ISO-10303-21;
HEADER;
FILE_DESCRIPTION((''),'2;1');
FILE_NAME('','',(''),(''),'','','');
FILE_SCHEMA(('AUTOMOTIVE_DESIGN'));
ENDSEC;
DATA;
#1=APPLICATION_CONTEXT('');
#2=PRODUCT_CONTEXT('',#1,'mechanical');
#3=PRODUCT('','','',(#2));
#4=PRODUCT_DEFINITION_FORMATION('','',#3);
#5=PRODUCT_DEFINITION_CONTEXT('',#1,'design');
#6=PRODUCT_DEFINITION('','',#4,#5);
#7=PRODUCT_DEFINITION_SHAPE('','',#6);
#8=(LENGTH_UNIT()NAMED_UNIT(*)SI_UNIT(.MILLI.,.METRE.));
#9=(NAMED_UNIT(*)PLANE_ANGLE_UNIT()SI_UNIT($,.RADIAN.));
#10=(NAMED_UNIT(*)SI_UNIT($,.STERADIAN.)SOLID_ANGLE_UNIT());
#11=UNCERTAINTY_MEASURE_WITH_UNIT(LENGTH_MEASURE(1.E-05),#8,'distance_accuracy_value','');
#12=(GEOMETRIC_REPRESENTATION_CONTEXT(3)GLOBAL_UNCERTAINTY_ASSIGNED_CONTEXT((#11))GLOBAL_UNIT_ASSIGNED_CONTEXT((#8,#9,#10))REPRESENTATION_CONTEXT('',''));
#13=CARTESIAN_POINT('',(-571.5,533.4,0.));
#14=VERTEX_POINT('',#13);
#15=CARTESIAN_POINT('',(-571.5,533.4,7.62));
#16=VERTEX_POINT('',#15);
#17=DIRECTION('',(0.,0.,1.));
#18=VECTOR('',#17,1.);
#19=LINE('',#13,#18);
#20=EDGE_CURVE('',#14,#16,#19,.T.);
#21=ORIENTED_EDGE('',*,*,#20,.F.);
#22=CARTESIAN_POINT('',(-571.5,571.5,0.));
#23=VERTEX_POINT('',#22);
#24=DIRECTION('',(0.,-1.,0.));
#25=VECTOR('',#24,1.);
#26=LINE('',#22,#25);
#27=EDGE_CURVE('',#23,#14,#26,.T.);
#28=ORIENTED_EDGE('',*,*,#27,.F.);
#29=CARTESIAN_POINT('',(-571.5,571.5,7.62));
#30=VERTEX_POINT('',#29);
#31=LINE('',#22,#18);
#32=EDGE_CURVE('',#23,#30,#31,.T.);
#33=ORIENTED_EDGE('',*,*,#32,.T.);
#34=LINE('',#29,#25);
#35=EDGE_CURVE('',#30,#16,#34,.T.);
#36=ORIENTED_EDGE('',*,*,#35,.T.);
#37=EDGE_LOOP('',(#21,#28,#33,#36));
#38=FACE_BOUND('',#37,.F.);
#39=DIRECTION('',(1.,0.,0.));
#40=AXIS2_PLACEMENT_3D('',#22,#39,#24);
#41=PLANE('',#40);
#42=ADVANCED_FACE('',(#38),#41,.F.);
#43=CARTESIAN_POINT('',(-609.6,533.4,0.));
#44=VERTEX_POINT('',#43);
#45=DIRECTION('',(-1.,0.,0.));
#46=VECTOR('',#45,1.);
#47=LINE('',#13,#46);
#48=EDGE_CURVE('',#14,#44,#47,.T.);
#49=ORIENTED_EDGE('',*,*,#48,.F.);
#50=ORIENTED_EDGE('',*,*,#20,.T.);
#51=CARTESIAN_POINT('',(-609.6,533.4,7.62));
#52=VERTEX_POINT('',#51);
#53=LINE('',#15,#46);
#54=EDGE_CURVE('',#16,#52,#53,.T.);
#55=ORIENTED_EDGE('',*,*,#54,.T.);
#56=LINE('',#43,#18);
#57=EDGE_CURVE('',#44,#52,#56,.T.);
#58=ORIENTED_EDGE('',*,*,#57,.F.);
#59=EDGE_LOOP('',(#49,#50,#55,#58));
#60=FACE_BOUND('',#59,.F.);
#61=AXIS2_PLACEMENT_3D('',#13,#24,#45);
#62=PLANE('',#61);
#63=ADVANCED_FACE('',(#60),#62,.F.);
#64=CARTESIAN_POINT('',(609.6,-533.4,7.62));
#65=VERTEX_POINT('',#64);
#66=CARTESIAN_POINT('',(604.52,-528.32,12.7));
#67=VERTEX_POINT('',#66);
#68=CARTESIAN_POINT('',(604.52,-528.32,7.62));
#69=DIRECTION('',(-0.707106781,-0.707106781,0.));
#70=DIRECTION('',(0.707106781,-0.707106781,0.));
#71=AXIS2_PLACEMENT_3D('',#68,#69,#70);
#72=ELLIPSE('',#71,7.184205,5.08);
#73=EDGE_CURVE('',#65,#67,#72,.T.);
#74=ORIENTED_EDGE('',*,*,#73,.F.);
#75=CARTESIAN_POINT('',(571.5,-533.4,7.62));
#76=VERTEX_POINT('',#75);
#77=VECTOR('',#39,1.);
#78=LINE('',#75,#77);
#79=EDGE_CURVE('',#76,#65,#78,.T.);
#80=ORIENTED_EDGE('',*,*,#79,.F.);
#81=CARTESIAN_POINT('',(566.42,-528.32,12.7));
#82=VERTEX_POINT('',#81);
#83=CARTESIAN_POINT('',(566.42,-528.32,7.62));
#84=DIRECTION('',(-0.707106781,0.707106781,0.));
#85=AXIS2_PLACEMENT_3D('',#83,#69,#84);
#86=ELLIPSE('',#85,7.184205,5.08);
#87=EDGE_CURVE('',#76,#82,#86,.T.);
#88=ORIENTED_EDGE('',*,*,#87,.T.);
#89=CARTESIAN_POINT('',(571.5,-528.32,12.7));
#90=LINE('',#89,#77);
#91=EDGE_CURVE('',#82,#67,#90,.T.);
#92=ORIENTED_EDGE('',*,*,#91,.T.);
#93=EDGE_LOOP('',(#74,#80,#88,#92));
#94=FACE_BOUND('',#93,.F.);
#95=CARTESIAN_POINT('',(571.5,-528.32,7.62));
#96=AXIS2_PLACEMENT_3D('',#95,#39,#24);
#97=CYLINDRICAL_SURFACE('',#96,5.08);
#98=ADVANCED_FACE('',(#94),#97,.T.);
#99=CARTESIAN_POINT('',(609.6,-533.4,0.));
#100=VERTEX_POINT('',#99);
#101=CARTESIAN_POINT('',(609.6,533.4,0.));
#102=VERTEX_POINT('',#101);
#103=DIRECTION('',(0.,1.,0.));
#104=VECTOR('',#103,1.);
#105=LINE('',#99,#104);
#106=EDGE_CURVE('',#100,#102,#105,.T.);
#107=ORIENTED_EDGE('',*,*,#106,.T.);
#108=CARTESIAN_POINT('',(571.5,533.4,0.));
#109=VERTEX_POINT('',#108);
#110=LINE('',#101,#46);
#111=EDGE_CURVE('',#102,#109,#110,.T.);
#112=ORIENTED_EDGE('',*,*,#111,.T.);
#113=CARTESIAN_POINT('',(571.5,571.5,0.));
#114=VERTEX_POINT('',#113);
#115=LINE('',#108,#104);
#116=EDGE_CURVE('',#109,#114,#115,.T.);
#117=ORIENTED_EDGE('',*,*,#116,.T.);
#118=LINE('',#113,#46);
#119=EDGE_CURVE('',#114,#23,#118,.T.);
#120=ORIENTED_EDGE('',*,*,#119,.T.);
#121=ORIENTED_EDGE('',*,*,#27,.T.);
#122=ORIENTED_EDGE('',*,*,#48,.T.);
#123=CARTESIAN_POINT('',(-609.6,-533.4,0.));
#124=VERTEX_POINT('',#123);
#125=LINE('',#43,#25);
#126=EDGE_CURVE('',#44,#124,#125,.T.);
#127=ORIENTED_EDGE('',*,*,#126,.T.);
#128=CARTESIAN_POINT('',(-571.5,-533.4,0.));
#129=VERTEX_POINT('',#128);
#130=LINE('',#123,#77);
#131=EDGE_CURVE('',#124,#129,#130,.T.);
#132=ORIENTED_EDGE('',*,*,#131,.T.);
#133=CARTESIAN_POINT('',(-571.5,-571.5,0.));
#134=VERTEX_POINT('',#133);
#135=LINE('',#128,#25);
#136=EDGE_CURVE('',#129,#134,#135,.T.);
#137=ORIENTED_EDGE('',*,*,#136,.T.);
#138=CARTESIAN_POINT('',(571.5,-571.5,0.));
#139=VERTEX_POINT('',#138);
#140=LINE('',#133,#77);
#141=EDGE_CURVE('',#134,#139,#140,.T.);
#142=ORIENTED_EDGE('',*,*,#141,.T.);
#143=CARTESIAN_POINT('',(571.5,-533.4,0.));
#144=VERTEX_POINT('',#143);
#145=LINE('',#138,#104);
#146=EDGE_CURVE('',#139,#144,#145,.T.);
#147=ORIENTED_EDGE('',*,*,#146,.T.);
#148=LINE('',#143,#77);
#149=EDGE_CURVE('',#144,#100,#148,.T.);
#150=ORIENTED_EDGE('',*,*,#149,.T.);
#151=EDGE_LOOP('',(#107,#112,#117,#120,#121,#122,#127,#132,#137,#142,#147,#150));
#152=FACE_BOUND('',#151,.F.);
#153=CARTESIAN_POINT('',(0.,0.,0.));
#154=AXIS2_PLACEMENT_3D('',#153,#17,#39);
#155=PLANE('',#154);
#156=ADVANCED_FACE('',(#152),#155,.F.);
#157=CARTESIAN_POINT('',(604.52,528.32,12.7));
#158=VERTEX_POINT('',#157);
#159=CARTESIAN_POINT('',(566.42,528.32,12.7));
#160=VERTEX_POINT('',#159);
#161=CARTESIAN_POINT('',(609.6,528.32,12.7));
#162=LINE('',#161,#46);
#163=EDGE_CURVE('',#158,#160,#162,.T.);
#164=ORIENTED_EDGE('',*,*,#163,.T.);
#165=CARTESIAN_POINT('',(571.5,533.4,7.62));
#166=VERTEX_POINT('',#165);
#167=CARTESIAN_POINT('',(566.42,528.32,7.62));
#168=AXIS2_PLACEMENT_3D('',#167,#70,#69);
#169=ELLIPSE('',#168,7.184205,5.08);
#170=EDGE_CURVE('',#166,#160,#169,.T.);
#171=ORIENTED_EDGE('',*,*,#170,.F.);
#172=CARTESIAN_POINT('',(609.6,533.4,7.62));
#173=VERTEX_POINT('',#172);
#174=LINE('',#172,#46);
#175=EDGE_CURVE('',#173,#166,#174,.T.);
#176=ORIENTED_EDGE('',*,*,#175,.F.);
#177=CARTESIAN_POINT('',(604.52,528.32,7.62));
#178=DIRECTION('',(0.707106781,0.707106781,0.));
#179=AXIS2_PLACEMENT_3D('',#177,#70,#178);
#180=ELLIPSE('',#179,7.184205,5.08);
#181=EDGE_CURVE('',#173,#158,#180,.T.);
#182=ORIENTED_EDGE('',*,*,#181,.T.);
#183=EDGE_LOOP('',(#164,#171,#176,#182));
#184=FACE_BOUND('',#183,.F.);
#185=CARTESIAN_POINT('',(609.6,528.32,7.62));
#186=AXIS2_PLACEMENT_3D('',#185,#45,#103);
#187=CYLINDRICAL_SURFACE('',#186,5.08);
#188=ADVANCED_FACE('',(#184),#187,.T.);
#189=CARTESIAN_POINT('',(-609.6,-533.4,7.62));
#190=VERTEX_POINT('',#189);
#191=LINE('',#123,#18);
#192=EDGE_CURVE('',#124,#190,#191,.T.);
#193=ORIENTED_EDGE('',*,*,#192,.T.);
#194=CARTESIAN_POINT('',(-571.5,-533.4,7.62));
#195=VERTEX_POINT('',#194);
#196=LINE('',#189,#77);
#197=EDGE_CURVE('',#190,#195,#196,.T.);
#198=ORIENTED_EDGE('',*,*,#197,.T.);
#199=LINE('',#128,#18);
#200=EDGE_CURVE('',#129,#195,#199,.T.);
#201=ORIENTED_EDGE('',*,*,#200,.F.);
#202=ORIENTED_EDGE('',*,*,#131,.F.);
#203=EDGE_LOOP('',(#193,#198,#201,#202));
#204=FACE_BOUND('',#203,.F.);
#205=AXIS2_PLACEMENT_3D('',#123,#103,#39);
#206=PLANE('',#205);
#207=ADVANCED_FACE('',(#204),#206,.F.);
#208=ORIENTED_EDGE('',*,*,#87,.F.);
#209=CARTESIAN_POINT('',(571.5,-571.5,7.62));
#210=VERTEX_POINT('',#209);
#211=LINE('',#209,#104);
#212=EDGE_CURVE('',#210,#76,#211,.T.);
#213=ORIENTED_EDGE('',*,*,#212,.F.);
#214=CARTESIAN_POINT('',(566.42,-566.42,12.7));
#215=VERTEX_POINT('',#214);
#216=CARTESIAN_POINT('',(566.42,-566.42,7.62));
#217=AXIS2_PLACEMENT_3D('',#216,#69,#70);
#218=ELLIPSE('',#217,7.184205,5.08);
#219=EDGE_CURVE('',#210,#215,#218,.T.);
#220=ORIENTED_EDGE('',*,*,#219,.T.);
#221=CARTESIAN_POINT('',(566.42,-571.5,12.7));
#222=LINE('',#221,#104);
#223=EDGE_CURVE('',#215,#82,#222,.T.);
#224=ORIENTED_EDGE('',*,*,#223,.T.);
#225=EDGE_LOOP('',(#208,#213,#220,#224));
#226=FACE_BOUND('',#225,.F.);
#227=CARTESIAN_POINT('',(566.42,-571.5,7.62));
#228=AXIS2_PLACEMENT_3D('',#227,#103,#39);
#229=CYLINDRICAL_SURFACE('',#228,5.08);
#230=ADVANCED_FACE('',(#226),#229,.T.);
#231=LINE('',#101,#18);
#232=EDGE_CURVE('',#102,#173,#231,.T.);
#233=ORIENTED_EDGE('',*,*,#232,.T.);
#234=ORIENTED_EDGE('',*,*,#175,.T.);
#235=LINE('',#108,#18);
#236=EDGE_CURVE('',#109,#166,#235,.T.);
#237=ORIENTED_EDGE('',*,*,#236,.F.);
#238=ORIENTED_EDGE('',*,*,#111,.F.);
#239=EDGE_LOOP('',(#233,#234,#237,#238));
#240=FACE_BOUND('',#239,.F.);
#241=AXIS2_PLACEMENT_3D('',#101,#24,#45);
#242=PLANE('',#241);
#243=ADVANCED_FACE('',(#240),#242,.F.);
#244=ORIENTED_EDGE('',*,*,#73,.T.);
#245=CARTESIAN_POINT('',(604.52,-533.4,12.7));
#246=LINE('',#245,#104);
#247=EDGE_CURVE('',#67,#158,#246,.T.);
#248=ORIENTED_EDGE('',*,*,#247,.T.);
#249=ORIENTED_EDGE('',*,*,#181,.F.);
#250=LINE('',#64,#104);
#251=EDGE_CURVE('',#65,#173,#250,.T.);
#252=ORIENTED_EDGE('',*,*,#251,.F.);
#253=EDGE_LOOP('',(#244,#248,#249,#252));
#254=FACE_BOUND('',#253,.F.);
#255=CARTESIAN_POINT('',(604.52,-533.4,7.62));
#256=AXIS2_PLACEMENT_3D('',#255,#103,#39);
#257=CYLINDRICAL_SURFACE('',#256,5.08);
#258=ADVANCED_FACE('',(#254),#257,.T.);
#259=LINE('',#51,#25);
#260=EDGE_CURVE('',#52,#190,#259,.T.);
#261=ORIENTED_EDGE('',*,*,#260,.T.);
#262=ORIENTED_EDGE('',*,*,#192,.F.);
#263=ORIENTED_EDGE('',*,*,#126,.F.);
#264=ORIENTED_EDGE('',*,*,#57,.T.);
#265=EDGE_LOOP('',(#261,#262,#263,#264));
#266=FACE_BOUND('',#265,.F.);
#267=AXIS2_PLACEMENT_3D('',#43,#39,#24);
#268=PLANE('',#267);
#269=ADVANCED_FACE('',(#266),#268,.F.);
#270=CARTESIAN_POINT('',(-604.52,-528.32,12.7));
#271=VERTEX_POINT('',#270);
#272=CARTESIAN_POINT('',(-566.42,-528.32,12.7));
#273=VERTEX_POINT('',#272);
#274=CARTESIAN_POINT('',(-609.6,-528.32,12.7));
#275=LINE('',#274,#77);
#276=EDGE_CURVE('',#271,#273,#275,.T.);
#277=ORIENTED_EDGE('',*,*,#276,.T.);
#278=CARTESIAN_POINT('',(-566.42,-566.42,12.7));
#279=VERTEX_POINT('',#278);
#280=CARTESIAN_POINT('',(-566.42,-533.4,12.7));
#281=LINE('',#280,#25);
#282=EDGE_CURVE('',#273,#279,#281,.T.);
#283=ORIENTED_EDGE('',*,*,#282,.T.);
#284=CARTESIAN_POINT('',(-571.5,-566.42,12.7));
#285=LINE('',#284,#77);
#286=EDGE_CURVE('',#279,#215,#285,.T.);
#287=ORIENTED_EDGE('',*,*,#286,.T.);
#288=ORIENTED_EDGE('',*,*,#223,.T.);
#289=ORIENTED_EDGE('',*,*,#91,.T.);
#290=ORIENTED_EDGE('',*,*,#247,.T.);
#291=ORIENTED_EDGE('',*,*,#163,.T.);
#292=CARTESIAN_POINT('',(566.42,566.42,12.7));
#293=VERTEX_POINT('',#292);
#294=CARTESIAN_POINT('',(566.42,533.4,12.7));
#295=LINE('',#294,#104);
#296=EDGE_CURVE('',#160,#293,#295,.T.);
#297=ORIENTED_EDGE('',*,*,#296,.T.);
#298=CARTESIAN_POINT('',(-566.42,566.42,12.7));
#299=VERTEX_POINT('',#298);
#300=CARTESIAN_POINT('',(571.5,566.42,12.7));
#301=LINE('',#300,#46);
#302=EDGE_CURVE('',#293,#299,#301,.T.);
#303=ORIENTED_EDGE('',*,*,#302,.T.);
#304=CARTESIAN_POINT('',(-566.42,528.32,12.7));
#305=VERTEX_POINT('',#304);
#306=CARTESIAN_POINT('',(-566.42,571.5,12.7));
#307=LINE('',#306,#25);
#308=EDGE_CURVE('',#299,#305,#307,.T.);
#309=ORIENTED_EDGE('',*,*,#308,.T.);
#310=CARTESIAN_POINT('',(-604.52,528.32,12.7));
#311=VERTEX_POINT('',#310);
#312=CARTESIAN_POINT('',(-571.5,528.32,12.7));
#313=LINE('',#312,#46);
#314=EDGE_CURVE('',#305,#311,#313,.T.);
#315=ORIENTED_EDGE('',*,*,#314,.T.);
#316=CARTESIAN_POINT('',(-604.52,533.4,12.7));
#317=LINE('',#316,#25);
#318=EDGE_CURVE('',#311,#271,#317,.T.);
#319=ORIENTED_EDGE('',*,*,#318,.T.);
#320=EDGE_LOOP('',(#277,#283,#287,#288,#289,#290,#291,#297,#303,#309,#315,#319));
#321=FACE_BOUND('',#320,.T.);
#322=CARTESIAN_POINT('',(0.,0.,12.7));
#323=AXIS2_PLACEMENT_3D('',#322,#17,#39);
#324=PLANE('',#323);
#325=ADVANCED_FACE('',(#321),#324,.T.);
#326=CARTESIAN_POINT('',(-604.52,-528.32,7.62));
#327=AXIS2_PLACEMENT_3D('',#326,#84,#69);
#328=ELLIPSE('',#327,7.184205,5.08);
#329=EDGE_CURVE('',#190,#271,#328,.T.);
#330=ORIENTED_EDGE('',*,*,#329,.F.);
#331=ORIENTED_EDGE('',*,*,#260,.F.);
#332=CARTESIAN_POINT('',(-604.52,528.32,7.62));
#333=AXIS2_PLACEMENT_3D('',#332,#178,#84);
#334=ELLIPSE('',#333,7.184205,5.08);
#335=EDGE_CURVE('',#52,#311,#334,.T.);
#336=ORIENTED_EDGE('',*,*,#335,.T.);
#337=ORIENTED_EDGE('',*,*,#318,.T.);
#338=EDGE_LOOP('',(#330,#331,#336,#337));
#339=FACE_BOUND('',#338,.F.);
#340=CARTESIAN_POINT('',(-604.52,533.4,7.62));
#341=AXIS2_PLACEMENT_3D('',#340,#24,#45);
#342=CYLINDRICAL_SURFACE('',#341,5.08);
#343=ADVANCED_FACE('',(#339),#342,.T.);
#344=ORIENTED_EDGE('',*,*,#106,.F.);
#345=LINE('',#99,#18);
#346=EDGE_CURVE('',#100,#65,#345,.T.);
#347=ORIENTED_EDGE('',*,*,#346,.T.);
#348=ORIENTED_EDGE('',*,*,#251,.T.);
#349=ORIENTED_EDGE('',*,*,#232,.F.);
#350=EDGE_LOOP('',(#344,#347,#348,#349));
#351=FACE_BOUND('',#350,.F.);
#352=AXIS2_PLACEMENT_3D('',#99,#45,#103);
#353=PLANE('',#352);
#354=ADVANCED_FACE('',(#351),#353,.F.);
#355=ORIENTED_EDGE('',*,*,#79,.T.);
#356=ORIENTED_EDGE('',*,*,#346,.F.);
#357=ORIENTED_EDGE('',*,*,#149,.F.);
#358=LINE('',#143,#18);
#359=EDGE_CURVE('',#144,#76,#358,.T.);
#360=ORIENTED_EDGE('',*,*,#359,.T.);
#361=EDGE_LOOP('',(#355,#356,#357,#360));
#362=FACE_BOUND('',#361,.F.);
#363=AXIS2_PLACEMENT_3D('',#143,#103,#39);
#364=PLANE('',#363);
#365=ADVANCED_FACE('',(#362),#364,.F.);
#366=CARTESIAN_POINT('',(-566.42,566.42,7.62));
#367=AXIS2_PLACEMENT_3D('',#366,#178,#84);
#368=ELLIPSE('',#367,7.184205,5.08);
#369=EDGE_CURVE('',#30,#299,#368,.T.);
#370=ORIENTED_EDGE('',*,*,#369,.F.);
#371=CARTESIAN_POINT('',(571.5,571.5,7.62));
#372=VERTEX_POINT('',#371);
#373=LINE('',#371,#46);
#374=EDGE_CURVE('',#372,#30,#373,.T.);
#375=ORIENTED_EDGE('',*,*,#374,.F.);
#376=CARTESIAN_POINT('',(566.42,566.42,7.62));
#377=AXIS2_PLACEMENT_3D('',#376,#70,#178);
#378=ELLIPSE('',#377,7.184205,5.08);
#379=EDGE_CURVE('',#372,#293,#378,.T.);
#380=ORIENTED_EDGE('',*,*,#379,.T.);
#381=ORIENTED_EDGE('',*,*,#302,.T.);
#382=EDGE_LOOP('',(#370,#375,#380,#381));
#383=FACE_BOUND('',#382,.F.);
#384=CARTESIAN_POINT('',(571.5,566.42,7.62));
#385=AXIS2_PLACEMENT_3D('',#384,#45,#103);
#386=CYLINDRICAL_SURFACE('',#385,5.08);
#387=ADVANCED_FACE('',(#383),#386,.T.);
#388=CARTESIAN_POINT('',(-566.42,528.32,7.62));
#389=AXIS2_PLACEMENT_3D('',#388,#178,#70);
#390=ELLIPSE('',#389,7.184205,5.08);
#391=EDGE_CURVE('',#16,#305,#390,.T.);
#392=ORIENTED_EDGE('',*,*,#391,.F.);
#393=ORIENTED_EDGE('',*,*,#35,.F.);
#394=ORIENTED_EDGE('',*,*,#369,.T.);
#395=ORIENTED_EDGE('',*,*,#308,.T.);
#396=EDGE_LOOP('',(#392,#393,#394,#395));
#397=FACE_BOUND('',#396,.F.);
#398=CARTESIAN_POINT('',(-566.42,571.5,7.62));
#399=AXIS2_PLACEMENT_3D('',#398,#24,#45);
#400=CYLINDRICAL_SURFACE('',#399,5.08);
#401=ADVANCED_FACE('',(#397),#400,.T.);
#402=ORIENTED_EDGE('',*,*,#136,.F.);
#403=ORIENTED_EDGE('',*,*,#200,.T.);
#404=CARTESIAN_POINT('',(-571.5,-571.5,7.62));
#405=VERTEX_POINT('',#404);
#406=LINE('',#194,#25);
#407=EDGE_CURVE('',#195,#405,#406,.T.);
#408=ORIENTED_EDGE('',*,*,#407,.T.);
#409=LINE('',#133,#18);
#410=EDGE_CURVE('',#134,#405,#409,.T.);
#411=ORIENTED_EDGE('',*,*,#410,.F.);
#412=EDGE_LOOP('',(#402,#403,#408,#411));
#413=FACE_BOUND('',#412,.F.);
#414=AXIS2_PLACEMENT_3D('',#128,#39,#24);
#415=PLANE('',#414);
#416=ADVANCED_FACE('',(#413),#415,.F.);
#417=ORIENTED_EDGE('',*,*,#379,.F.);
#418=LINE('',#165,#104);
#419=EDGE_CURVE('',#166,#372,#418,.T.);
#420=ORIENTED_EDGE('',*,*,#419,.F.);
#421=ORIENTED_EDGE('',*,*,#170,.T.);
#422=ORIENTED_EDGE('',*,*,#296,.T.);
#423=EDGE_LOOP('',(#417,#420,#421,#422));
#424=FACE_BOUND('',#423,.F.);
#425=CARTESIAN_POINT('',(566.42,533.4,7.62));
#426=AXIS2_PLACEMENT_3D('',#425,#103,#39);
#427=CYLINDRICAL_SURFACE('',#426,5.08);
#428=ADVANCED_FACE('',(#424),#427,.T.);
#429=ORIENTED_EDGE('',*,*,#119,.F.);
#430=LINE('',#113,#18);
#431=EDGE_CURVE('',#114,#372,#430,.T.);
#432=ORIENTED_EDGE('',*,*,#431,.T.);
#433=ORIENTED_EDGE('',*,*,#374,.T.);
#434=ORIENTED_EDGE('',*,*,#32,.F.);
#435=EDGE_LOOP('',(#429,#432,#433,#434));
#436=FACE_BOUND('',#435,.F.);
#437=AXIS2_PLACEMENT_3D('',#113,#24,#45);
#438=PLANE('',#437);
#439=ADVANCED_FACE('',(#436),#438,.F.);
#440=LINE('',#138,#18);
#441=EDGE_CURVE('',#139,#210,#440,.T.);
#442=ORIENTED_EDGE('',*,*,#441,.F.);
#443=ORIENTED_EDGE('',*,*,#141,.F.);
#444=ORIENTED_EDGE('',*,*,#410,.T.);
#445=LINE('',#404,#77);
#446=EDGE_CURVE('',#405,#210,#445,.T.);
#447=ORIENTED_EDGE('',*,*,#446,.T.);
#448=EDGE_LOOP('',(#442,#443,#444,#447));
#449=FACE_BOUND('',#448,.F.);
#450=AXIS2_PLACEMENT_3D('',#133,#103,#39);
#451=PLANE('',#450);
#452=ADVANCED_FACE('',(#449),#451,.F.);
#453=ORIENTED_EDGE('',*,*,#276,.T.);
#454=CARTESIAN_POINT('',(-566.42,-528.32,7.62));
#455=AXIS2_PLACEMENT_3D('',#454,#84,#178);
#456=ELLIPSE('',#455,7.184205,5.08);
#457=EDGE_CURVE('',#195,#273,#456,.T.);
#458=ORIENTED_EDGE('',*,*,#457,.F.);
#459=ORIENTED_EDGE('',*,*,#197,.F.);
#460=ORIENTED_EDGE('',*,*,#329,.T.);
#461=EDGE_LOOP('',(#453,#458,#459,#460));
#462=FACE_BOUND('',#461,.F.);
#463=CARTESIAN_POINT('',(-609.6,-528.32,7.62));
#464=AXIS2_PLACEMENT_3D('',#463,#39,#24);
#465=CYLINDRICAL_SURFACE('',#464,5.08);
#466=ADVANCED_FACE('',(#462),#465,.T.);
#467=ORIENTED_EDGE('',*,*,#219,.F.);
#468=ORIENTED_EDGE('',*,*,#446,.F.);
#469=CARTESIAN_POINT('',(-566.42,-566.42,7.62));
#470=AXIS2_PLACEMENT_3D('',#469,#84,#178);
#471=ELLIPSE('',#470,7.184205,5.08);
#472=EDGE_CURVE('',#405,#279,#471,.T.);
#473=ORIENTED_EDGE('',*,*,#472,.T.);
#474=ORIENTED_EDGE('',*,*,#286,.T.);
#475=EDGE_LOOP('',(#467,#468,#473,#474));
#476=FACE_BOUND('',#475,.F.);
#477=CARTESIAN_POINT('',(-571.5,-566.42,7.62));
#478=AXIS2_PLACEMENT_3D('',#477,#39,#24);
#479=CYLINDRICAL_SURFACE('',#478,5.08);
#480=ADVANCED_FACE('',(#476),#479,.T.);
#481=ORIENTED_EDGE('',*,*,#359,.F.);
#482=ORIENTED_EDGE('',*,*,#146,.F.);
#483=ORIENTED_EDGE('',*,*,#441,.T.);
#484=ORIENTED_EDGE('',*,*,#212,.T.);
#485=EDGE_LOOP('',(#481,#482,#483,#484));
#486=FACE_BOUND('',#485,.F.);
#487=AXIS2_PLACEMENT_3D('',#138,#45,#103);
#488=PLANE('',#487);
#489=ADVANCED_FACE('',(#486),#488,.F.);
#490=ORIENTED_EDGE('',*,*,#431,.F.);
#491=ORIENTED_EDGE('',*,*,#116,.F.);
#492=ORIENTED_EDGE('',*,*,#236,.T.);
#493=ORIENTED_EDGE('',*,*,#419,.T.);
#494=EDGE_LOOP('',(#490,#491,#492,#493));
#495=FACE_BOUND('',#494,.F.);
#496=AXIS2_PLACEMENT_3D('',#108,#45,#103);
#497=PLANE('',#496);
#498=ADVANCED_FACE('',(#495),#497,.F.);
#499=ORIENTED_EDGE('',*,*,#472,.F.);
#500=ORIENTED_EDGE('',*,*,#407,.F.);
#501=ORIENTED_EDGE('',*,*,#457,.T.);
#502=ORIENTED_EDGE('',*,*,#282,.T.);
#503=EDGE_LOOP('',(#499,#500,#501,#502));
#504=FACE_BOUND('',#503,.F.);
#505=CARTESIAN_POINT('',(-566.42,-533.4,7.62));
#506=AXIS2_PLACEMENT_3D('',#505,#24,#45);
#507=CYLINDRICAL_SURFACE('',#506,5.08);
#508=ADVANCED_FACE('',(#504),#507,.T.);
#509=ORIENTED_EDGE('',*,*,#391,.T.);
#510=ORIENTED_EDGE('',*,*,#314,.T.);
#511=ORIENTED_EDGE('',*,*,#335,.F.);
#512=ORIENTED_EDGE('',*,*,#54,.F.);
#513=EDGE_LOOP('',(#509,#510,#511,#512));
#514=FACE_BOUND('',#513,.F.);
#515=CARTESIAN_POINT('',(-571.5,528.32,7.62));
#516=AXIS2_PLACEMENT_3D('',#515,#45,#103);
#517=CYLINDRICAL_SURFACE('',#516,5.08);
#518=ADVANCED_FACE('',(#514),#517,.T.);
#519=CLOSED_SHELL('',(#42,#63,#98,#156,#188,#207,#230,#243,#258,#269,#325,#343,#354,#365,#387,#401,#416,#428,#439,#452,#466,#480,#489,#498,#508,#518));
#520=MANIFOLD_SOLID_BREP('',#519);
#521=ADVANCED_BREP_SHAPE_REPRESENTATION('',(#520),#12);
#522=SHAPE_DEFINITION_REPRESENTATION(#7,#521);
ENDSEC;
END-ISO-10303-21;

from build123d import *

# Parameters (mm, degrees)
F1_DEPTH = 12.7
F2_R     = 5.08


# Not quite as in the source:
# - a feature names something its author has since deleted; it is built from what else it names


with BuildPart() as f1:
    # F0 (on Top) → F1 (new body)
    with BuildSketch(Plane.XY):
        Polygon((-571.5, -571.5), (571.5, -571.5), (571.5, -533.4), (609.6, -533.4), (609.6, 533.4), (571.5, 533.4), (571.5, 571.5), (-571.5, 571.5), (-571.5, 533.4), (-609.6, 533.4), (-609.6, -533.4), (-571.5, -533.4), align=None)
    extrude(amount=F1_DEPTH)

    # F2
    f2_edges = [f1.edges().sort_by_distance(p)[0] for p in [
        (0, -571.5, 12.7),
        (571.5, -552.45, 12.7),
        (590.55, -533.4, 12.7),
        (609.6, 0, 12.7),
        (590.55, 533.4, 12.7),
        (571.5, 552.45, 12.7),
        (0, 571.5, 12.7),
        (-571.5, 552.45, 12.7),
        (-590.55, 533.4, 12.7),
        (-609.6, 0, 12.7),
        (-590.55, -533.4, 12.7),
        (-571.5, -552.45, 12.7),
    ]]
    fillet(f2_edges, radius=F2_R)


solid = f1.part
